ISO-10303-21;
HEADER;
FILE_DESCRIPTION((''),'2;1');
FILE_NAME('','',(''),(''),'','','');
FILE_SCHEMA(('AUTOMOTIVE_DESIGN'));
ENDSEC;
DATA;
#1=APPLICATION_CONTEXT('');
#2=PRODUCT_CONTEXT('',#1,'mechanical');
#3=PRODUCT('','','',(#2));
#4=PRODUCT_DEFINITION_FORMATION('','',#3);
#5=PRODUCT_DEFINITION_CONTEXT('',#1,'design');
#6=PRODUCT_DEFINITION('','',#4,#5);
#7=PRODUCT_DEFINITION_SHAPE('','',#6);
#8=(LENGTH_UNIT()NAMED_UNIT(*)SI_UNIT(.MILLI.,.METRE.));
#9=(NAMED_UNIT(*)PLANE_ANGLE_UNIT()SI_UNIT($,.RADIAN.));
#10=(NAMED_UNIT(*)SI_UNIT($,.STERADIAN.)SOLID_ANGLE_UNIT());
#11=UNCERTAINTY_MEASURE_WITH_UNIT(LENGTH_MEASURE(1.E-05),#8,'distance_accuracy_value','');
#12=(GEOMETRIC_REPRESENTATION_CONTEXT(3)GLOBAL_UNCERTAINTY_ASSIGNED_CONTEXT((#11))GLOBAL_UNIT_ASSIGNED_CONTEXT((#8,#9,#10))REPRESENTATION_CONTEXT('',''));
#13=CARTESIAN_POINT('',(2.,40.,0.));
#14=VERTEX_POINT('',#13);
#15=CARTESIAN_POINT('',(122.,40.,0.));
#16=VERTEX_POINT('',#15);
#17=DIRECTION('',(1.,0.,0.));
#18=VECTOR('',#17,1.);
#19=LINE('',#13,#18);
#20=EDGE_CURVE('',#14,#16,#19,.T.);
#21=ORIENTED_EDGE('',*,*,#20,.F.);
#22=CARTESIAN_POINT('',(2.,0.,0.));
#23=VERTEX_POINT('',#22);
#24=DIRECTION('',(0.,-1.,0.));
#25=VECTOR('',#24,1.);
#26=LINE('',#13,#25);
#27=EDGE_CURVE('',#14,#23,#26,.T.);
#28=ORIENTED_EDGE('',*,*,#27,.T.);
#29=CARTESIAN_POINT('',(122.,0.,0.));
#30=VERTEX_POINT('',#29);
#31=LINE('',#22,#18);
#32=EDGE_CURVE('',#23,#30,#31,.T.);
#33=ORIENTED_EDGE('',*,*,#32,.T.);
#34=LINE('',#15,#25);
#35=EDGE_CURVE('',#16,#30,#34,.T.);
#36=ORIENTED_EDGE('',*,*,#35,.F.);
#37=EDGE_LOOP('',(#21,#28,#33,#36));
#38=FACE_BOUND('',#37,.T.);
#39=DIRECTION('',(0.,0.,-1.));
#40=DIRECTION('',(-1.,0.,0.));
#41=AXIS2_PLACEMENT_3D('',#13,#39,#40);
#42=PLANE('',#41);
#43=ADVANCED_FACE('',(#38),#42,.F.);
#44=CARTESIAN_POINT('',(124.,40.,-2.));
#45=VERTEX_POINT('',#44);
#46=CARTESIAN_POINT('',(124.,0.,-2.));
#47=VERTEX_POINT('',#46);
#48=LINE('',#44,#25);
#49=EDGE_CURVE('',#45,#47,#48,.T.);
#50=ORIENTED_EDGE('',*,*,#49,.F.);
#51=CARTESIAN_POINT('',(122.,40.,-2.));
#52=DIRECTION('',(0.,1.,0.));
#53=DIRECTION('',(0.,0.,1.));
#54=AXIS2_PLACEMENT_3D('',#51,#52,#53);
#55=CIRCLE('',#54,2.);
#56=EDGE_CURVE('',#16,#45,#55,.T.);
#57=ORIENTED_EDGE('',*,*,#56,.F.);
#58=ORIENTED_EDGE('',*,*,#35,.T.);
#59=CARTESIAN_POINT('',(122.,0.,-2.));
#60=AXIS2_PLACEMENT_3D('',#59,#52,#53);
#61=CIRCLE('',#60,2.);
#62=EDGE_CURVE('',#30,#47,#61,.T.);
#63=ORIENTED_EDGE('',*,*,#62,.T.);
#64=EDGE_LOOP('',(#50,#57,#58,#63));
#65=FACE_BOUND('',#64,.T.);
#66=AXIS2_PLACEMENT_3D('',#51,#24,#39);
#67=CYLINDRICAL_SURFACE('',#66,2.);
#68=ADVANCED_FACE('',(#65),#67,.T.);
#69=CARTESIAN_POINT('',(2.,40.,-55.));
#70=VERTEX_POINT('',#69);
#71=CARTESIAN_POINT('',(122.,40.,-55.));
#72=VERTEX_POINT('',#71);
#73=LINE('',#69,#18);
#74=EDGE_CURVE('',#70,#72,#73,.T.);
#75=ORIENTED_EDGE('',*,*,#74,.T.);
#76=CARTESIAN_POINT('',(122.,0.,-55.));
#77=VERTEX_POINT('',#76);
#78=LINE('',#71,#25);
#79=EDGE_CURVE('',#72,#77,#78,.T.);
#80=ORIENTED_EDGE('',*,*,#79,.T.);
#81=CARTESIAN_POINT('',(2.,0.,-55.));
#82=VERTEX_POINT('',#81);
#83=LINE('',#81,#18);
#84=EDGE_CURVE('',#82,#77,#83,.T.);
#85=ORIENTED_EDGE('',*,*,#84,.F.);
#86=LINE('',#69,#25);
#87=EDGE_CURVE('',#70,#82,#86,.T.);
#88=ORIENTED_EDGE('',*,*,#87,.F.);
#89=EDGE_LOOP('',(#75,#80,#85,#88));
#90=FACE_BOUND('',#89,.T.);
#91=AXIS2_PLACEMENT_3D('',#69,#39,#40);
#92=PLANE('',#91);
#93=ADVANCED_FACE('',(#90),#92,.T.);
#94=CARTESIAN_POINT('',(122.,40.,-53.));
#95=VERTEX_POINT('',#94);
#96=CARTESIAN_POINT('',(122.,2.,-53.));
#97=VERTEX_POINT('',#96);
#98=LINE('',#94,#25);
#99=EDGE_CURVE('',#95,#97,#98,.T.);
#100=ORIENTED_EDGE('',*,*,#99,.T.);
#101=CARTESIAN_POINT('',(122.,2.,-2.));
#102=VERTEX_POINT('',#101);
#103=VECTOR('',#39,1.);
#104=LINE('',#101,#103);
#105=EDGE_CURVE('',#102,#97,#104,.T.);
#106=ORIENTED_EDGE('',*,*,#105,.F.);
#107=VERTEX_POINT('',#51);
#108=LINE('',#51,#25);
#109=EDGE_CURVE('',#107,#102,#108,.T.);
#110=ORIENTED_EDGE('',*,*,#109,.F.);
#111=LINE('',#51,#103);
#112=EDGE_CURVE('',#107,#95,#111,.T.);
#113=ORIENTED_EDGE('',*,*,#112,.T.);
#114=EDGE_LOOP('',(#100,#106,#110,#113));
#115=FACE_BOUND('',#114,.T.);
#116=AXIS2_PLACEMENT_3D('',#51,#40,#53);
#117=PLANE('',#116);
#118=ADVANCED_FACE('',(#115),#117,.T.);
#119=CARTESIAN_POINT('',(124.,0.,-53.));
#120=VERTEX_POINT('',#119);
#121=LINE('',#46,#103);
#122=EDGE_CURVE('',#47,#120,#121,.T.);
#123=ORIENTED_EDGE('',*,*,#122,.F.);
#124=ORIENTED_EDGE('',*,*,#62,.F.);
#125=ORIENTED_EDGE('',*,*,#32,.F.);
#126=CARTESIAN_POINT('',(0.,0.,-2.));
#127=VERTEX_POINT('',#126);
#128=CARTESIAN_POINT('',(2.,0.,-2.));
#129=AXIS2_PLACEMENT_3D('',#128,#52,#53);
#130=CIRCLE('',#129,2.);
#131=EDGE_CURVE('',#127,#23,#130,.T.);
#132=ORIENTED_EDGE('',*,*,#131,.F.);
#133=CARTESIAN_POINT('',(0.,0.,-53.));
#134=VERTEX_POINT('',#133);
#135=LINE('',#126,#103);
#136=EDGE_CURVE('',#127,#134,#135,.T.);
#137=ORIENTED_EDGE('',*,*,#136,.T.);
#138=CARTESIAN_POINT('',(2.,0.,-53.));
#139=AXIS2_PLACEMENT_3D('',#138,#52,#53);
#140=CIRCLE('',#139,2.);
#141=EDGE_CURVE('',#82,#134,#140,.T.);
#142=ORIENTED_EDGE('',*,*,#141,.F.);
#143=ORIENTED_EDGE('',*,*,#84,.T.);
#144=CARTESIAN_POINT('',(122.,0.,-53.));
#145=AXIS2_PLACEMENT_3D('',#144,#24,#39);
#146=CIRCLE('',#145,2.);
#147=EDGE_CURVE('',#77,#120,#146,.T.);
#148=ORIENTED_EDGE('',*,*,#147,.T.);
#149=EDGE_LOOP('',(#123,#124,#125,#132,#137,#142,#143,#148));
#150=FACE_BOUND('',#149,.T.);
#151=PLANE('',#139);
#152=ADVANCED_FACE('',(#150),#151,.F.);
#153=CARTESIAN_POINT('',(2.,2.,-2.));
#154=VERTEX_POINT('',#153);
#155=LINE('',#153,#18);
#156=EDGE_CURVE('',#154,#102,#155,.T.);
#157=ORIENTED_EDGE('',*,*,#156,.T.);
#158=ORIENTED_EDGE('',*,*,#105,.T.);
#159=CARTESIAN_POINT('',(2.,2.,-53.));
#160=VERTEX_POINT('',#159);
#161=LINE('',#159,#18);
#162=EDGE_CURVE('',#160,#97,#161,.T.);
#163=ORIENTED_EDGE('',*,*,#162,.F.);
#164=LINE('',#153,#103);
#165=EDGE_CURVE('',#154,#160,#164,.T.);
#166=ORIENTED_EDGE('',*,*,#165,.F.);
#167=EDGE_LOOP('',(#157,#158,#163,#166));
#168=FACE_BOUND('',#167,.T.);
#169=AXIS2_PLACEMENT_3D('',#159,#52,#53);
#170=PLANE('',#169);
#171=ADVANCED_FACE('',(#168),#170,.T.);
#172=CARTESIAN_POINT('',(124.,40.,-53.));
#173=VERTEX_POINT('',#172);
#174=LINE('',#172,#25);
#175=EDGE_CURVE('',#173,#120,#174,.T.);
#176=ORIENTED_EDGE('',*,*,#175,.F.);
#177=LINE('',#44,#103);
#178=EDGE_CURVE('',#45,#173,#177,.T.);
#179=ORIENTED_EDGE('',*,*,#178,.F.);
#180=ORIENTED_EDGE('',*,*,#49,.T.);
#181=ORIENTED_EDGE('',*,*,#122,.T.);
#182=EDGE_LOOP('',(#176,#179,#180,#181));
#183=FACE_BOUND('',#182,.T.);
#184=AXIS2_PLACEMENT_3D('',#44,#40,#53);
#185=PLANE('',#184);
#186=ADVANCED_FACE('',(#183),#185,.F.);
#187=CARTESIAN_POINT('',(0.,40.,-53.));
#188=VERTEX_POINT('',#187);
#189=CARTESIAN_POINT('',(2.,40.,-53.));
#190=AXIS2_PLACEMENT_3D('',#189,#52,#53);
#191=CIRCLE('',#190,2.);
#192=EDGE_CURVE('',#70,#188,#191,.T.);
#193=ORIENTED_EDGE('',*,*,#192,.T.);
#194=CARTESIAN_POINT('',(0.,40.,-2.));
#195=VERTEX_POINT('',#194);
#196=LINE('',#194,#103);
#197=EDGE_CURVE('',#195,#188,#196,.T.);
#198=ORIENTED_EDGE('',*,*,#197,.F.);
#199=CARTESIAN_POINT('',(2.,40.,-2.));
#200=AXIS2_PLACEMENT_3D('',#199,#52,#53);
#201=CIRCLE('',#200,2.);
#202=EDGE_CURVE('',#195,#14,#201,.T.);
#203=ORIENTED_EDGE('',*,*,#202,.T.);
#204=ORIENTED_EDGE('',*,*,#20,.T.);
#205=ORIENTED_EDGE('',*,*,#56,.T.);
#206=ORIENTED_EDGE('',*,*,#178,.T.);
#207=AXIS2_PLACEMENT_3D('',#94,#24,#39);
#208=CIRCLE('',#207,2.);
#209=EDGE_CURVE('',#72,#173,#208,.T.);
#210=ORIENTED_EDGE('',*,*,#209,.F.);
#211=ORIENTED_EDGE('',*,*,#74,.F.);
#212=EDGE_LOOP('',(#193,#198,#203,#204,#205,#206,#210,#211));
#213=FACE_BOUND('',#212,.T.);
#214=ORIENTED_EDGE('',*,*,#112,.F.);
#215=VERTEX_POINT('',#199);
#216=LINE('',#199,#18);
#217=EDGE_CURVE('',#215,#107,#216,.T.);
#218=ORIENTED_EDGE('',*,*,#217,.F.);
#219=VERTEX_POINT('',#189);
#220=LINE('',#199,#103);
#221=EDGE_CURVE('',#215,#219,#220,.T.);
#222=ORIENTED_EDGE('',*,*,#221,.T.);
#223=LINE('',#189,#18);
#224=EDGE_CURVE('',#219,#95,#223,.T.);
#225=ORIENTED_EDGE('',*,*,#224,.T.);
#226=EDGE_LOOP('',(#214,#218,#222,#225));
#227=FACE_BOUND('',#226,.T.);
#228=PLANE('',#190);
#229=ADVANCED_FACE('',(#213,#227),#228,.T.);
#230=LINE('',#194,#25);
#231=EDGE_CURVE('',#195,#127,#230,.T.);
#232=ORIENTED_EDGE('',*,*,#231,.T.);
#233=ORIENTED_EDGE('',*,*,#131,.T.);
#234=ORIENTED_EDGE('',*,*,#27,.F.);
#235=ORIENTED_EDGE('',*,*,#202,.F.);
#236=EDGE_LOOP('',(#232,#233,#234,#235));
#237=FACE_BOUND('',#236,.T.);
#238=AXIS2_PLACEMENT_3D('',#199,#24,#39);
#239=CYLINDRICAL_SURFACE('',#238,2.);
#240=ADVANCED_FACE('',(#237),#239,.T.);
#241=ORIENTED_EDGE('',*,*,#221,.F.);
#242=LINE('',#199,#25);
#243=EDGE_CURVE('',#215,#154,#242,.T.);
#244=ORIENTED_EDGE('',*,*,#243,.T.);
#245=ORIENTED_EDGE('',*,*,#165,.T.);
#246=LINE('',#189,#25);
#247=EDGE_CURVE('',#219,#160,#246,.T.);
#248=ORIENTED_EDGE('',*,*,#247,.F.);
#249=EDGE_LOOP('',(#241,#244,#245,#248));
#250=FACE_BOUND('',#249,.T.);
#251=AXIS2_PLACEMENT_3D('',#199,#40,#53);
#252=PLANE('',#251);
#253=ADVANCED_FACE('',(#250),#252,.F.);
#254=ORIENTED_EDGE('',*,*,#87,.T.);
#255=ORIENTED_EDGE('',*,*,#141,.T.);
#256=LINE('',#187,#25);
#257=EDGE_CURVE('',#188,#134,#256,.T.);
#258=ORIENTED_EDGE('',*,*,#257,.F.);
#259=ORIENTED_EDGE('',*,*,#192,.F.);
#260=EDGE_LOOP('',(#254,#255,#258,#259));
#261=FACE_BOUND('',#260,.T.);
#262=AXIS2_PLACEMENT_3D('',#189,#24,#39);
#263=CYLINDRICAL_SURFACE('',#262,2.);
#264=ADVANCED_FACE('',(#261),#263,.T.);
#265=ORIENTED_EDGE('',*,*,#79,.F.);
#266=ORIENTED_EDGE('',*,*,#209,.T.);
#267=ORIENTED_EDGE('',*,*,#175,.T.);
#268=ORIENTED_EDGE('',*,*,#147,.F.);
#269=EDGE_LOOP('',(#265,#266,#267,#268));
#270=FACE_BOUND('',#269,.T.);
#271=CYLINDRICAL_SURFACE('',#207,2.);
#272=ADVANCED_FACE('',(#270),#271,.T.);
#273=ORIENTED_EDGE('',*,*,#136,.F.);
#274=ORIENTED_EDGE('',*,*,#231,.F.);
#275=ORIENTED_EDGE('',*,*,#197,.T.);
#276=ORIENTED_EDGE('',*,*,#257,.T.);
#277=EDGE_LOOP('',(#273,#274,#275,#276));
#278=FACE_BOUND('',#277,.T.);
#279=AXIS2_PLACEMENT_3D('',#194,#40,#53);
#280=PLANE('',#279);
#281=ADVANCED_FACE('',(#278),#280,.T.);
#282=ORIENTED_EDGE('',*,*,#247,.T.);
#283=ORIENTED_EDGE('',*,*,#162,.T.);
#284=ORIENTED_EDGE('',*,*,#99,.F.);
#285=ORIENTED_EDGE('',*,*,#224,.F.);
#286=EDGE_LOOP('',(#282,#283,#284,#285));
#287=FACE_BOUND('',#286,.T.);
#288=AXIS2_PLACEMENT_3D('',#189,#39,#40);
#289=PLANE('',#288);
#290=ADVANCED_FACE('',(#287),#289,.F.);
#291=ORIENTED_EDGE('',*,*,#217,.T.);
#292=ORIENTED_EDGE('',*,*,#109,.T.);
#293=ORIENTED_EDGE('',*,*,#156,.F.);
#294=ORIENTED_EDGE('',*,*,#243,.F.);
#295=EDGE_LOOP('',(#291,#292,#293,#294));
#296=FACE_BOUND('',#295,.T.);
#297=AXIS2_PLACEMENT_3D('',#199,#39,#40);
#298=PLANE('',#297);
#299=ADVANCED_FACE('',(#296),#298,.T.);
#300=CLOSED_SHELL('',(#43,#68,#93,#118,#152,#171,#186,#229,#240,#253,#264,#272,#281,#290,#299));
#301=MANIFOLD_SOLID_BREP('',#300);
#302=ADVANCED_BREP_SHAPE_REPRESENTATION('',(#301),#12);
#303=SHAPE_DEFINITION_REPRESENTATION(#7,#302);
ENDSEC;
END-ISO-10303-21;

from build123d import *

# Parameters (mm, degrees)
BOSS_EXTRUDE1_DEPTH = 40
SHELL1_START        = 2
SHELL1_OUTLINE_W    = 38
SHELL1_OUTLINE_H    = 51
SHELL1_DEPTH        = 120


# Read off the part's stored shape, not the designer's step: Shell1
with BuildPart() as part:
    # Sketch1 → Boss-Extrude1 (new body)
    with BuildSketch(Plane(origin=(0, 0, 0), x_dir=(1, 0, 0), z_dir=(0, 1, 0))):
        with BuildLine():
            Line((2, 0), (122, 0))
            ThreePointArc((122, 0), (123.414213562, 0.585786438), (124, 2))
            Line((124, 2), (124, 53))
            ThreePointArc((124, 53), (123.414213562, 54.414213562), (122, 55))
            Line((122, 55), (2, 55))
            ThreePointArc((2, 55), (0.585786438, 54.414213562), (0, 53))
            Line((0, 53), (0, 2))
            ThreePointArc((0, 2), (0.585786438, 0.585786438), (2, 0))
        make_face()
    extrude(amount=BOSS_EXTRUDE1_DEPTH)

    # Shell1 outline → Shell1 (cut)
    with BuildSketch(Plane.YZ.offset(SHELL1_START)):
        with Locations((21, -27.5)):
            Rectangle(SHELL1_OUTLINE_W, SHELL1_OUTLINE_H)
    extrude(amount=SHELL1_DEPTH, mode=Mode.SUBTRACT)


solid = part.part
